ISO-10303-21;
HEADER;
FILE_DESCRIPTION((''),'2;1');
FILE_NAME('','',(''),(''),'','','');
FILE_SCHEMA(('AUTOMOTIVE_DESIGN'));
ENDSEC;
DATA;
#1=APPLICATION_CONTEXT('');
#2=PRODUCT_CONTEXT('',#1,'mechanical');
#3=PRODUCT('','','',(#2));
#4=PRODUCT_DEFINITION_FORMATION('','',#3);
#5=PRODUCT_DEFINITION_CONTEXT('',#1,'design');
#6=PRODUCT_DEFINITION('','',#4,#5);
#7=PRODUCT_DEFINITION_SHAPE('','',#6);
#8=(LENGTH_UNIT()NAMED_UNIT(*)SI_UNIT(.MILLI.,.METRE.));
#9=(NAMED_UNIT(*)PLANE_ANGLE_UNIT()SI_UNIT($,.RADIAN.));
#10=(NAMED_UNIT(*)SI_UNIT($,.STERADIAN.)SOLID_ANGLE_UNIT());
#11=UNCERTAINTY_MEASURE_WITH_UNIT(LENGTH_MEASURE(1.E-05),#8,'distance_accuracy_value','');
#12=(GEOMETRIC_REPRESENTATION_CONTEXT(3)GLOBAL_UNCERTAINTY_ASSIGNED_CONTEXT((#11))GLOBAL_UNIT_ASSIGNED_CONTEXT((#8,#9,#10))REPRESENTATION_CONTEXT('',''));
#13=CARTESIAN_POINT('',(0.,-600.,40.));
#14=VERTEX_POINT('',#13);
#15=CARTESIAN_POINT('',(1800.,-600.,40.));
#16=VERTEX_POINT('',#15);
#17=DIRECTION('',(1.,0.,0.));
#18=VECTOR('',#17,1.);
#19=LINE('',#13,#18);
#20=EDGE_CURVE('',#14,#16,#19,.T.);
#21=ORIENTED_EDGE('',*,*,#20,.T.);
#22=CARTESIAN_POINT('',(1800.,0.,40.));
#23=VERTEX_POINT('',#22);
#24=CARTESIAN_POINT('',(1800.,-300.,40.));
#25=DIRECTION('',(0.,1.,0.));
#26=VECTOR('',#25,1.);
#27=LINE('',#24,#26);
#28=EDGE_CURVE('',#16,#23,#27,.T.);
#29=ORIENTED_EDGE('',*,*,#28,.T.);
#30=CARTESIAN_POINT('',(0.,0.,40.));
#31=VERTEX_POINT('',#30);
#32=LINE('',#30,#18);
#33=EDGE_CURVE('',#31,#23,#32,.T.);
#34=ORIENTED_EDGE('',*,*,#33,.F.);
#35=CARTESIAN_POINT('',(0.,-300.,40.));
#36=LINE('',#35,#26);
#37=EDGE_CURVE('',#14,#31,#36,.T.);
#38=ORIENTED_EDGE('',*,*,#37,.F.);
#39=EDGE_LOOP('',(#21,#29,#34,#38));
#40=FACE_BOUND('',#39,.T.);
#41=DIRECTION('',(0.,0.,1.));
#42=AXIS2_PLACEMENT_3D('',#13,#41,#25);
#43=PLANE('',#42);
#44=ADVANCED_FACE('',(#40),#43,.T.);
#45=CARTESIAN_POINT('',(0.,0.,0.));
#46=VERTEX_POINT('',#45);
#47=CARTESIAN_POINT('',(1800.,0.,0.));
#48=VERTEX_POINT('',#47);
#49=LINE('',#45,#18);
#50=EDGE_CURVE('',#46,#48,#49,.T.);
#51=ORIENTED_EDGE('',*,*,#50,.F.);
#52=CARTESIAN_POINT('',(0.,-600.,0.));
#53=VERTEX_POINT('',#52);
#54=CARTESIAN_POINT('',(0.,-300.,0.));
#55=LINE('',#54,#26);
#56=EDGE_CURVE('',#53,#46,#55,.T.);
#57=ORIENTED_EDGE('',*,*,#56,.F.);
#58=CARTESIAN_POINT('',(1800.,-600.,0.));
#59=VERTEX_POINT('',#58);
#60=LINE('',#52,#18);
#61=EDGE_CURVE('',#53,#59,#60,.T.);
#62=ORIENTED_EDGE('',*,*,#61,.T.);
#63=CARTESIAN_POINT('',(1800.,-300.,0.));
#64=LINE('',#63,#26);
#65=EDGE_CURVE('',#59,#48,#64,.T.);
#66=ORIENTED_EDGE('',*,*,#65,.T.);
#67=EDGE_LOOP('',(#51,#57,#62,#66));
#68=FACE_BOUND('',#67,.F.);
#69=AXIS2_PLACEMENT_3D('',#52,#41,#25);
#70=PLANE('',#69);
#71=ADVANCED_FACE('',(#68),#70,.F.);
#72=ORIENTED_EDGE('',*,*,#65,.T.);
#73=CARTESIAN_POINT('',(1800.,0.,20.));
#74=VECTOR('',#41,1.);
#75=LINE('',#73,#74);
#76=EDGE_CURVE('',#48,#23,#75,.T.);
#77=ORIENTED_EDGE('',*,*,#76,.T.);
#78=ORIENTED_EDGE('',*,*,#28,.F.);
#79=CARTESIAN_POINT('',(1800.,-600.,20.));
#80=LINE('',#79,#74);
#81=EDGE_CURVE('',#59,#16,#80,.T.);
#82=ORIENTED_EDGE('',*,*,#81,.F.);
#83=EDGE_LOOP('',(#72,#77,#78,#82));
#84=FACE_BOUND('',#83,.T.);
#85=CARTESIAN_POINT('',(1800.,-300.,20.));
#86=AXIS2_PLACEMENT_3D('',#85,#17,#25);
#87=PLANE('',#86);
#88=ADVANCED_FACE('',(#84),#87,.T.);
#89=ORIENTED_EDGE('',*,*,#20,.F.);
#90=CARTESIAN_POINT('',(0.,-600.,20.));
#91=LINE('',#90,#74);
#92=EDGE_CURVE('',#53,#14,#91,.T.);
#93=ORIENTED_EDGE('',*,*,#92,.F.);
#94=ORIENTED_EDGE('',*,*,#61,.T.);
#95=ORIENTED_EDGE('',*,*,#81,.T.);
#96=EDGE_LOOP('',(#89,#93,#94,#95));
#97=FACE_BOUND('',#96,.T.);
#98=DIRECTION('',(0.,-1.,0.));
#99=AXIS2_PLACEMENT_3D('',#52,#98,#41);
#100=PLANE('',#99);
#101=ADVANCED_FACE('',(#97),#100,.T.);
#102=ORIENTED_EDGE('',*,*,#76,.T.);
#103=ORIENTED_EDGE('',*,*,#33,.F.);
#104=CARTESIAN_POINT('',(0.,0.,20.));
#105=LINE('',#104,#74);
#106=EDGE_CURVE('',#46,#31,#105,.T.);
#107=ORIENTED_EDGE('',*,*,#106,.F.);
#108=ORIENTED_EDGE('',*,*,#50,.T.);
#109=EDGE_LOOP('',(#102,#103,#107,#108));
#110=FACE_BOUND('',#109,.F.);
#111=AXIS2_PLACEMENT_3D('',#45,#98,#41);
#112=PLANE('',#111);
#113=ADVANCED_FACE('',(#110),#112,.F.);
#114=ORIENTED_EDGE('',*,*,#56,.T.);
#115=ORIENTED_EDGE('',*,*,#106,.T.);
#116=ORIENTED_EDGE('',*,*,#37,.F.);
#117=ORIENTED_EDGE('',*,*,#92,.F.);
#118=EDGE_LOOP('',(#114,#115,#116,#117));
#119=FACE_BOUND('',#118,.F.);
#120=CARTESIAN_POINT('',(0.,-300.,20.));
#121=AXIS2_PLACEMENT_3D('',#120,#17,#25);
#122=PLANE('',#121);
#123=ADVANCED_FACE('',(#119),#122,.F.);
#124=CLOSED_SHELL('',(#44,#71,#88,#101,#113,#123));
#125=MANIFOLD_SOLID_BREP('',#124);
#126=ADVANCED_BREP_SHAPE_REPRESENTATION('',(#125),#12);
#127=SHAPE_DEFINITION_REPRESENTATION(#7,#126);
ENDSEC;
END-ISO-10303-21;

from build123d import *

# Parameters (mm, degrees)
F0_W     = 600
F0_H     = 40
F1_DEPTH = 1800


# Not quite as in the source:
# - a feature of the source that left no trace in its solid (it failed there, or was rolled back) is left out


with BuildPart() as f1:
    # F0 (on Right) → F1 (new body)
    with BuildSketch(Plane.YZ):
        with Locations((-300, 20)):
            Rectangle(F0_W, F0_H)
    extrude(amount=F1_DEPTH)


solid = f1.part
